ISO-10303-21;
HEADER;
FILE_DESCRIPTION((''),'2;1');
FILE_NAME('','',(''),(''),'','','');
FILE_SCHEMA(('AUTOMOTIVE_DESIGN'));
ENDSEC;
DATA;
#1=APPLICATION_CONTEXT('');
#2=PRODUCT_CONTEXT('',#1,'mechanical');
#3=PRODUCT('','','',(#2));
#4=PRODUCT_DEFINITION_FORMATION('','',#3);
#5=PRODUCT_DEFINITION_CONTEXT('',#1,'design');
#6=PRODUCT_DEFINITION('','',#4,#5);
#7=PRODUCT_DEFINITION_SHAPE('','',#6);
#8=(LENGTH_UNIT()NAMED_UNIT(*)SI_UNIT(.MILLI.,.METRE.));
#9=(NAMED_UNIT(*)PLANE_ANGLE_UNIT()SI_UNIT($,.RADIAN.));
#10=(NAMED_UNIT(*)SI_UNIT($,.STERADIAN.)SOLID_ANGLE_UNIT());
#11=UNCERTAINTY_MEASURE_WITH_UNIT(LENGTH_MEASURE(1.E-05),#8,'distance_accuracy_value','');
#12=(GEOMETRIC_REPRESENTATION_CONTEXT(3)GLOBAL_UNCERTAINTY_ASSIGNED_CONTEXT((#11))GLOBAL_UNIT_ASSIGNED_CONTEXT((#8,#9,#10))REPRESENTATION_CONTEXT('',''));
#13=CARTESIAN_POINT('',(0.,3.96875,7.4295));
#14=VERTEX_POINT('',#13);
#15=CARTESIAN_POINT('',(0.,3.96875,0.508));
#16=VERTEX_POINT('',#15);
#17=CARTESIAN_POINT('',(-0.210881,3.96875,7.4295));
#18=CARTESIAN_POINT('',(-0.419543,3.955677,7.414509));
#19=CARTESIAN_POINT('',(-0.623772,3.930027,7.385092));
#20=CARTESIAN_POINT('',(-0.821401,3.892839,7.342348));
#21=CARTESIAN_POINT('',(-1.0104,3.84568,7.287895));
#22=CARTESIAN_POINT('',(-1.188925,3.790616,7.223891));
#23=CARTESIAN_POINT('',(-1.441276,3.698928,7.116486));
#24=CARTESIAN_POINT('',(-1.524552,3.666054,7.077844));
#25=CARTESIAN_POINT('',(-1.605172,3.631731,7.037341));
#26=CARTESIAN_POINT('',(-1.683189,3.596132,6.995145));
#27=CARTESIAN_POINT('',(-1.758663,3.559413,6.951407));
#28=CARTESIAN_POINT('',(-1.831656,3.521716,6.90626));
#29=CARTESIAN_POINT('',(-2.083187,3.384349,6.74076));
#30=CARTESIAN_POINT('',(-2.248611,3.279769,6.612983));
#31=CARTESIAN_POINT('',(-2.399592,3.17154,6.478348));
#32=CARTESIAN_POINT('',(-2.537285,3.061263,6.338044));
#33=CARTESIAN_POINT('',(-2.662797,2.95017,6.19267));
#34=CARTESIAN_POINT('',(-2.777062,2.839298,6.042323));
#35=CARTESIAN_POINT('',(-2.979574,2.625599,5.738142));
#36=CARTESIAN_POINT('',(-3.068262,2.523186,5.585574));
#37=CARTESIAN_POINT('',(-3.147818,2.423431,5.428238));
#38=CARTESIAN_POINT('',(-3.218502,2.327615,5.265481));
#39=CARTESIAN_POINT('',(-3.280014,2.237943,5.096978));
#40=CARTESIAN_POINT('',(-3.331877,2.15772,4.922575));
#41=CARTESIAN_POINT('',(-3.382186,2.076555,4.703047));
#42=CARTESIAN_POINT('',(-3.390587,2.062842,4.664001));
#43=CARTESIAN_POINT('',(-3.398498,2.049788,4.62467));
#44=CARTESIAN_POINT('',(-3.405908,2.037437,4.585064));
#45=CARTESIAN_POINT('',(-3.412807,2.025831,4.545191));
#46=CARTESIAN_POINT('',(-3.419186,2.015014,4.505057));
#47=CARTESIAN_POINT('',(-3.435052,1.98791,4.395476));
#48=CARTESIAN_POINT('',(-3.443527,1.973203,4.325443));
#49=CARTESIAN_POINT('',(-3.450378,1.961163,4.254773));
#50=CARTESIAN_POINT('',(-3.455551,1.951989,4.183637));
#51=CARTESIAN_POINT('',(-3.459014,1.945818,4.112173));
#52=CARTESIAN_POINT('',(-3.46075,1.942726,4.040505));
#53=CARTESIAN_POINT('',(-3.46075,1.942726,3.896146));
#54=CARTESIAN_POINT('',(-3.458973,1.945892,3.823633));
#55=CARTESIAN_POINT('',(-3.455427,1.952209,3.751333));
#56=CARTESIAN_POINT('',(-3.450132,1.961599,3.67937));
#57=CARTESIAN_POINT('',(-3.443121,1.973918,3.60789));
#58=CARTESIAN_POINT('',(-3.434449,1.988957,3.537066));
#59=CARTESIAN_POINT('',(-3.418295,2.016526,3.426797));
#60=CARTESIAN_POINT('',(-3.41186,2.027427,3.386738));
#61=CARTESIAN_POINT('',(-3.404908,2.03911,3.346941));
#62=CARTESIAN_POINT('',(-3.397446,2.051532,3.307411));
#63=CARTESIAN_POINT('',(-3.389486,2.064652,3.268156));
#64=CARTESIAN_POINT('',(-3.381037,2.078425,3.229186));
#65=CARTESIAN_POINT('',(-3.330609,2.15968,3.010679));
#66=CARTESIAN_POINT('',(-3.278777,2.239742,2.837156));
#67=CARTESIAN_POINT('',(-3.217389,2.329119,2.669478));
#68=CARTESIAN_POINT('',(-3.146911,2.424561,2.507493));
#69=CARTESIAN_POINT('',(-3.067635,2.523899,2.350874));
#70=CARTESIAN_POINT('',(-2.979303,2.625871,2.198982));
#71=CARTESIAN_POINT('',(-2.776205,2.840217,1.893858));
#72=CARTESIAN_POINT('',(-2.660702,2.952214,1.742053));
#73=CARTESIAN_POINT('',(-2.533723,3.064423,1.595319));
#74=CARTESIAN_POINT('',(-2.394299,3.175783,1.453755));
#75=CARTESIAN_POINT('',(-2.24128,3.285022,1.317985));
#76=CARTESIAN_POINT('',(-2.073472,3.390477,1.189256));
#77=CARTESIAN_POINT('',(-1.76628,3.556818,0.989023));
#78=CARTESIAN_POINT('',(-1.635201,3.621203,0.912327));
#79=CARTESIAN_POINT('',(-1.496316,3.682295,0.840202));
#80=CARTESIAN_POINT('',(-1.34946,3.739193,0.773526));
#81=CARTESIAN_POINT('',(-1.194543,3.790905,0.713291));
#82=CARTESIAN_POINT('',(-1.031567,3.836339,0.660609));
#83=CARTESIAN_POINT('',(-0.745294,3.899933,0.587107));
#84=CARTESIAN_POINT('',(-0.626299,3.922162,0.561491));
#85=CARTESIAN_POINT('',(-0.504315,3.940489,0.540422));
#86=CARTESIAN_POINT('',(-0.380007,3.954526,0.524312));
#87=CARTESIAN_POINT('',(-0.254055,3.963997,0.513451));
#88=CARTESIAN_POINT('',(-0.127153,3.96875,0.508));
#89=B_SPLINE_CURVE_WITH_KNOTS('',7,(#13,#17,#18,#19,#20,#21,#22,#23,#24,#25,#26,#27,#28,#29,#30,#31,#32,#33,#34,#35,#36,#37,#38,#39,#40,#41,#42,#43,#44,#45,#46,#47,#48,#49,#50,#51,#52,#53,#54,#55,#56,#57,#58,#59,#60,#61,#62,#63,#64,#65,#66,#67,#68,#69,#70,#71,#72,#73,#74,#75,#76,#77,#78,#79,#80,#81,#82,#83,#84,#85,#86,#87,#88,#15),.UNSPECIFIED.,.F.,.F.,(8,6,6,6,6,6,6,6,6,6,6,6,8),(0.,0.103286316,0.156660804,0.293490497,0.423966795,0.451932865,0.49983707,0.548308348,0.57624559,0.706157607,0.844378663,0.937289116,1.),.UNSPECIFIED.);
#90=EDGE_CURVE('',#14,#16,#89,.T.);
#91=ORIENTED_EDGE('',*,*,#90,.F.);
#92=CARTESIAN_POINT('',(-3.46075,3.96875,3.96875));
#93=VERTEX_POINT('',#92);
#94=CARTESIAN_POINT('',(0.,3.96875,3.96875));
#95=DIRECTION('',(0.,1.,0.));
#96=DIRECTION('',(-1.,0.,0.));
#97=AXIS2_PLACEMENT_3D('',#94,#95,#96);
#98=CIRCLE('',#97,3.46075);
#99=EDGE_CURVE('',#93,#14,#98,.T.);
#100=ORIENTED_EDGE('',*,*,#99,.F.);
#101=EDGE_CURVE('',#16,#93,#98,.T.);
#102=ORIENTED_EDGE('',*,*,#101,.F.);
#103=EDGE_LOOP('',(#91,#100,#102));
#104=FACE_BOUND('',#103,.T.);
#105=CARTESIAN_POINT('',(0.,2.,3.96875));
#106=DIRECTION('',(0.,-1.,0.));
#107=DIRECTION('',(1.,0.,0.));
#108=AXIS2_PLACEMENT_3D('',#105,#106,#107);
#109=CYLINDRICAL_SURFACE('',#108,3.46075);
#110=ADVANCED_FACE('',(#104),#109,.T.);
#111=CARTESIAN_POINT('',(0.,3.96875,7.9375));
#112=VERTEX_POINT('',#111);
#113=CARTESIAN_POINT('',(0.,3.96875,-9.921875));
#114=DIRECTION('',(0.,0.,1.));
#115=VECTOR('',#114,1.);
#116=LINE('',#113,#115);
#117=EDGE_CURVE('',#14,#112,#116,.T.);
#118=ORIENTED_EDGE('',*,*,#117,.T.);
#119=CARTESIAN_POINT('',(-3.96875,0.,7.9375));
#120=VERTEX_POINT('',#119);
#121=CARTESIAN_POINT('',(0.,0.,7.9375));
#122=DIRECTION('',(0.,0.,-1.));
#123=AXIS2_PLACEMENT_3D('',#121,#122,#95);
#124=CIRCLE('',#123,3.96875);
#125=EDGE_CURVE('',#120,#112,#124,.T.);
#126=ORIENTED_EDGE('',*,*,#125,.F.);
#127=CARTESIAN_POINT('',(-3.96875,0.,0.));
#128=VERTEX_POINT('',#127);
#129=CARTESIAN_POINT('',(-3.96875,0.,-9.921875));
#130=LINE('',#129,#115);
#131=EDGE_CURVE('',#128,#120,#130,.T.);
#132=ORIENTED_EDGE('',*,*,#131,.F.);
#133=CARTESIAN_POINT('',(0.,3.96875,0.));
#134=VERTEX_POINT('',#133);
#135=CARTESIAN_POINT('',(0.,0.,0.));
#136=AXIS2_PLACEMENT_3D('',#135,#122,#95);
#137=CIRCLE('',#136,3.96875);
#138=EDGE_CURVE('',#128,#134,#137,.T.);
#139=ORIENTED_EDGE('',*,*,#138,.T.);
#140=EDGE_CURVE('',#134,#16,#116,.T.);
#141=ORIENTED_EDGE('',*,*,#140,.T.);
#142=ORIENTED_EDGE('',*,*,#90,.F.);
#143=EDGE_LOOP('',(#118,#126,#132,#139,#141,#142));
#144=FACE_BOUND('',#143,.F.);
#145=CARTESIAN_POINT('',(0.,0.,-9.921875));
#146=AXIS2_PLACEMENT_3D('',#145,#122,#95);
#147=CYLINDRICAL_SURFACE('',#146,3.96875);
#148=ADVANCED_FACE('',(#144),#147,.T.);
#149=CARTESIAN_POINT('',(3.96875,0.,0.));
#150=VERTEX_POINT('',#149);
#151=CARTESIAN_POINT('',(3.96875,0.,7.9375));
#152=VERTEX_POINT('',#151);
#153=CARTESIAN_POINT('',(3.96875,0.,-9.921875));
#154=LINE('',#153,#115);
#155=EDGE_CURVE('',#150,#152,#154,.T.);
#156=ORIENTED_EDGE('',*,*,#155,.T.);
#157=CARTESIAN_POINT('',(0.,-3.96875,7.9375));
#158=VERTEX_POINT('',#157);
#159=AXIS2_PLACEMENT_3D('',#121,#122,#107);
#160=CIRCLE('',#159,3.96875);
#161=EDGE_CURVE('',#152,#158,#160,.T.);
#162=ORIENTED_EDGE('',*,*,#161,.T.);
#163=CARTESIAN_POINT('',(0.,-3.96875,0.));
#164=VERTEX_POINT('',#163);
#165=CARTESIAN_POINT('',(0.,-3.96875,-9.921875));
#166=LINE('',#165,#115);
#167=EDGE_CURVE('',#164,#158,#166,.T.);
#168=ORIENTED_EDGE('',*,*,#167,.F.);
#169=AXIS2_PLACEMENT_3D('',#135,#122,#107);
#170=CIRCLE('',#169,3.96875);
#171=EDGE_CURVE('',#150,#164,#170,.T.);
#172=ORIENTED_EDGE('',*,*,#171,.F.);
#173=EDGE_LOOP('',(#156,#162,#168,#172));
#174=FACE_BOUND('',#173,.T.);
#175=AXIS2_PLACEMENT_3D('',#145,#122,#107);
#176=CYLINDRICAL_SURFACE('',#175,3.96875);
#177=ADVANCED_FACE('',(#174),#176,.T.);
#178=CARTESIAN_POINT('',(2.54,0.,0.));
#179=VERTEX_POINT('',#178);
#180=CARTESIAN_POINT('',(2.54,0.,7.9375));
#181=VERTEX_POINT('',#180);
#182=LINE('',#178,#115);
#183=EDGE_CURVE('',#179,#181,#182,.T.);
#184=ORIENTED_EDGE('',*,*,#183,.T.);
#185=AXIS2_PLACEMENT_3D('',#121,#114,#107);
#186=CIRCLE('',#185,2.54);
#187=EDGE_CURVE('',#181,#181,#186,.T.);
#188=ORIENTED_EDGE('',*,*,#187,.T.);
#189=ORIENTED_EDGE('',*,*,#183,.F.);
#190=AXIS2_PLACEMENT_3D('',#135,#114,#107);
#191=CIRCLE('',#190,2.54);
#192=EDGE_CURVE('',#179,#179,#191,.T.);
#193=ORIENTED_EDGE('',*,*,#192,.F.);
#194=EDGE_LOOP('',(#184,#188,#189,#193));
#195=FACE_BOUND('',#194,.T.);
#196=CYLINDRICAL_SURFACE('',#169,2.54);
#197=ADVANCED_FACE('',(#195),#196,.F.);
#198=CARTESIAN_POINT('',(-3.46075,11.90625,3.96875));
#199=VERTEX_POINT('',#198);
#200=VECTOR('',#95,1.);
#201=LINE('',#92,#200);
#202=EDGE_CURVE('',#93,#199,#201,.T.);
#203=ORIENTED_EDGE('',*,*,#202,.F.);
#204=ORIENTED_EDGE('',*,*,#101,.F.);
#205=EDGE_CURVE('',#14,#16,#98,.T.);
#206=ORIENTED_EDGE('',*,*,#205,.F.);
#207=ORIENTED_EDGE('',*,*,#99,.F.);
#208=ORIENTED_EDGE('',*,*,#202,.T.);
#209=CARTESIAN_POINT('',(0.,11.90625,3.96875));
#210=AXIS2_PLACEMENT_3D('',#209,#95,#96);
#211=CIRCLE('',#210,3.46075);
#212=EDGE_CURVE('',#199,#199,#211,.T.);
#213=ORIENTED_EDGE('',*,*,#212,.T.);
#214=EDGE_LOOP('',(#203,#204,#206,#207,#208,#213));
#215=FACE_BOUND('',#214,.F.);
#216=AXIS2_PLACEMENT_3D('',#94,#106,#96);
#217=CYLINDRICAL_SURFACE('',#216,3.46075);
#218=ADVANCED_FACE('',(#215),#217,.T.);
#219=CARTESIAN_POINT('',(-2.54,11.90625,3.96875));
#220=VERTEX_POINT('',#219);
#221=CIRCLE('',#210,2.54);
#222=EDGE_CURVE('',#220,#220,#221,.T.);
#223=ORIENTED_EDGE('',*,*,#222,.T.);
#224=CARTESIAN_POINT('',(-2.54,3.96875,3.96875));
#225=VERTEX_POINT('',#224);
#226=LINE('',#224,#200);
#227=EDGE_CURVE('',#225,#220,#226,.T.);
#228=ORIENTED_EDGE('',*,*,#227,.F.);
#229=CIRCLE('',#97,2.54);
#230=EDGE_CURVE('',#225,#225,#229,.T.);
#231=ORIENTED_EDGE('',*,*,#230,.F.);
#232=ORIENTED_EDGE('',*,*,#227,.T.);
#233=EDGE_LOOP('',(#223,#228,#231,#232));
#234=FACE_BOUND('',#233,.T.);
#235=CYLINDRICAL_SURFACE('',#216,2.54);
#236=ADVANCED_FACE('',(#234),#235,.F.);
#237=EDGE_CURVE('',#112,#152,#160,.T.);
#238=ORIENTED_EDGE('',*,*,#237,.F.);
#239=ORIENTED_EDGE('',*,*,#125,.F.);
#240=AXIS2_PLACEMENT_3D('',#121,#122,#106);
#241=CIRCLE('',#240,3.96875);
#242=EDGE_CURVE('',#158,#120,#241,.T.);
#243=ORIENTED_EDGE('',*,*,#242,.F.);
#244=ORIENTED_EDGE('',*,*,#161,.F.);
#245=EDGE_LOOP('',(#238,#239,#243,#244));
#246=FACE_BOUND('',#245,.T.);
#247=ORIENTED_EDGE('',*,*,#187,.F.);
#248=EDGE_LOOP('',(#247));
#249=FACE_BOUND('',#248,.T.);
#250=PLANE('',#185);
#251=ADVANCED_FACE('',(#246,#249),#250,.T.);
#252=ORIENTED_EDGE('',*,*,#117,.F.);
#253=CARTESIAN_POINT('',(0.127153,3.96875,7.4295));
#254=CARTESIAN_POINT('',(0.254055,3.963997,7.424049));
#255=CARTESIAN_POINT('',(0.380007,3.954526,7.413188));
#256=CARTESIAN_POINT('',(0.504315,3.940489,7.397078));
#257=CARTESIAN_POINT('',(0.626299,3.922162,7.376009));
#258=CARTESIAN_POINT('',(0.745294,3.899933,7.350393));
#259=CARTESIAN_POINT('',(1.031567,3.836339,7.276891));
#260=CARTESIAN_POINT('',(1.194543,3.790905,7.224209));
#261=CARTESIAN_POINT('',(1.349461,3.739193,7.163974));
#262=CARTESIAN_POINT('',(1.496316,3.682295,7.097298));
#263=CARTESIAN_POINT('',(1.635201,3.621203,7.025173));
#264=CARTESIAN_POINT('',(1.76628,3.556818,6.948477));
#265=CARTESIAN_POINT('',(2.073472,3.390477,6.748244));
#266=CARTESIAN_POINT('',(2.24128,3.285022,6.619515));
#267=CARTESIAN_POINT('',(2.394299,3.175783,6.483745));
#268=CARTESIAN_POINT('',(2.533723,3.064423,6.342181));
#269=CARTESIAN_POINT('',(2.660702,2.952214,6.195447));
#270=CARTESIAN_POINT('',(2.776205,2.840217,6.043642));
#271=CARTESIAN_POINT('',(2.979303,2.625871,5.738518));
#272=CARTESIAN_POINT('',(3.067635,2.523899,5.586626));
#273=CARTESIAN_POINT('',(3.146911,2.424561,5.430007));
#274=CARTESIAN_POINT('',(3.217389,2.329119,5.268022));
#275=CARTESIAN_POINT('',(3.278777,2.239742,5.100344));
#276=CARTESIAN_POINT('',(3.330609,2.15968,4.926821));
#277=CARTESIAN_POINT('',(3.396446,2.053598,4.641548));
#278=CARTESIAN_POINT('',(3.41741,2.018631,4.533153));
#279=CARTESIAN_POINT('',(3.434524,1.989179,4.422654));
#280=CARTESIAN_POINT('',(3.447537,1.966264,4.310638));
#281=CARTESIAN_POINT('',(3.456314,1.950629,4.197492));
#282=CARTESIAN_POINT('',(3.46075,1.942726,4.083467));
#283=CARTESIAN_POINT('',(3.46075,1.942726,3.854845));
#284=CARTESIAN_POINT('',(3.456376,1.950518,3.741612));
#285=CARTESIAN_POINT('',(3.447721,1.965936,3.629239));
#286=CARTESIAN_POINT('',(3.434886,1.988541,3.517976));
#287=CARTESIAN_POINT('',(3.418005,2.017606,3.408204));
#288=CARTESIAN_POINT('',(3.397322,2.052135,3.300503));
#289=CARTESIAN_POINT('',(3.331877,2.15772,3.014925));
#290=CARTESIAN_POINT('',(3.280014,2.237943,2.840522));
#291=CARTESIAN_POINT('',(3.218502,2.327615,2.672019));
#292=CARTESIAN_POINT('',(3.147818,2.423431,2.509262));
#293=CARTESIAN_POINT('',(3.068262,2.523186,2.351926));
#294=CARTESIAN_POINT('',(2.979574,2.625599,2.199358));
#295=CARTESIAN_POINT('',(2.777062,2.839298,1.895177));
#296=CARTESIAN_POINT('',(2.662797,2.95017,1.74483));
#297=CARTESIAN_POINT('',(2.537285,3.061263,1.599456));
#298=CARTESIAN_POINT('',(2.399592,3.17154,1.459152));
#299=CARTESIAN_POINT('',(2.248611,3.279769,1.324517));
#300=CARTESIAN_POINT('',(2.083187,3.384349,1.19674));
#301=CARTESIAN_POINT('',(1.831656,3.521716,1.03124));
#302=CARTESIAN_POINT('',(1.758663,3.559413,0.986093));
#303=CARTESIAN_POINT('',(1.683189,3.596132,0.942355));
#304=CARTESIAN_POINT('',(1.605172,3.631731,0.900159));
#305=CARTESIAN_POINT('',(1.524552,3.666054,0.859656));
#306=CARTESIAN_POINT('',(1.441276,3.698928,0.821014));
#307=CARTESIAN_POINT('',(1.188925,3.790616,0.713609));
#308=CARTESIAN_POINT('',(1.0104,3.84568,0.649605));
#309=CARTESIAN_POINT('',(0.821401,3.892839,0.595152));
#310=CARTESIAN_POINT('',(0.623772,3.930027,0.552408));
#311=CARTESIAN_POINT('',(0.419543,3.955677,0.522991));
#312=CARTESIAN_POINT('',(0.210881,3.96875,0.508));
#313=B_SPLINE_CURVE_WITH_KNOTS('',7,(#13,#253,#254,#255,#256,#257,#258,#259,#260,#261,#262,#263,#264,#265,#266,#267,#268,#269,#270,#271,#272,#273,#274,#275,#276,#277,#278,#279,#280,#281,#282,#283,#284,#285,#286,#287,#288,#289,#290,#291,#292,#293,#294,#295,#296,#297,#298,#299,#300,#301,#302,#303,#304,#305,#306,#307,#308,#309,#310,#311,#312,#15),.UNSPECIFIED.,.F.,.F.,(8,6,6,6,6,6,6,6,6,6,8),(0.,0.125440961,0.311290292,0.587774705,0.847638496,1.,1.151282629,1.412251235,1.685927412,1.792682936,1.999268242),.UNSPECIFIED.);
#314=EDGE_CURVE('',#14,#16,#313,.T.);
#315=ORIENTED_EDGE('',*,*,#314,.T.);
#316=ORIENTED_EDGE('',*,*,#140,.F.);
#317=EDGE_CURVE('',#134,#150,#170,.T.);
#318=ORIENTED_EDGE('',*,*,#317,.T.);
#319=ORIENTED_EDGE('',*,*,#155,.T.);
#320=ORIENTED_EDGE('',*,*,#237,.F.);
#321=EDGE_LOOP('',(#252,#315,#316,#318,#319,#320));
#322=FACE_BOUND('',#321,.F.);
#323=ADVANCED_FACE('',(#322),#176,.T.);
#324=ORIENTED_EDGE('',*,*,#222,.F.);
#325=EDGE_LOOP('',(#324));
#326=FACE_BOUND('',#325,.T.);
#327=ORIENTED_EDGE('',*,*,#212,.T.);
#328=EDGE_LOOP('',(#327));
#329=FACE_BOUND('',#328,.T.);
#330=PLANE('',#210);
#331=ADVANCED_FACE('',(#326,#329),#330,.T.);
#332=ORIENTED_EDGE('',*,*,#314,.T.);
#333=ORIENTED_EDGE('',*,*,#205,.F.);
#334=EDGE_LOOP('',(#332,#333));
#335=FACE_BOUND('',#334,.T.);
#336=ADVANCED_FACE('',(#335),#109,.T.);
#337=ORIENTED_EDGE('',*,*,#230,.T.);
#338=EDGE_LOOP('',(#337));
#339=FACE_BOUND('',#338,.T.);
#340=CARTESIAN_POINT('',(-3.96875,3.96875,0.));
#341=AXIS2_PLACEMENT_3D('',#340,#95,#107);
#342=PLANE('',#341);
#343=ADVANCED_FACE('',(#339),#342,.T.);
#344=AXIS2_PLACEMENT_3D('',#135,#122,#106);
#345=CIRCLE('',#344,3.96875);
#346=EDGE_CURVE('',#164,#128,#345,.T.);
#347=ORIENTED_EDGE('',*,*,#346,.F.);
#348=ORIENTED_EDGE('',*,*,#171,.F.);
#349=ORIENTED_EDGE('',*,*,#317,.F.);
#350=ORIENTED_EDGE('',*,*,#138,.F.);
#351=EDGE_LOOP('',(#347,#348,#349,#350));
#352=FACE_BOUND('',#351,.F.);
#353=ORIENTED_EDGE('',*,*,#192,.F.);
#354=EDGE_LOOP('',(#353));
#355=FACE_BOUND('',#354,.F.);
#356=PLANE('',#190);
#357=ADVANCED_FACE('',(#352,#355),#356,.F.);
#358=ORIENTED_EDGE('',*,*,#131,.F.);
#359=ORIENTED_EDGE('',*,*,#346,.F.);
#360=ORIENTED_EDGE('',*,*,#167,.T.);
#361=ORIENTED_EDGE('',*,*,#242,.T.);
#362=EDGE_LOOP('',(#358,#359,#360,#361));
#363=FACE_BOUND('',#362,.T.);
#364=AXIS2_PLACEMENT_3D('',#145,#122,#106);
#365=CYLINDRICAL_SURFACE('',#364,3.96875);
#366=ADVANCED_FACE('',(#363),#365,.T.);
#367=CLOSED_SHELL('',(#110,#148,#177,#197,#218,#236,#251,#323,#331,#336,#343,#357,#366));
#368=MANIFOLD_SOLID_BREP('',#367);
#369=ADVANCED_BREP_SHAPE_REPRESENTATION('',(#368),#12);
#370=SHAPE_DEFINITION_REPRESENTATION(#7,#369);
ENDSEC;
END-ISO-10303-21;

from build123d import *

# Parameters (mm, degrees)
F0_W         = 7.9375
F0_H         = 7.9375
F0_R         = 2.54
F1_DEPTH     = 7.9375
F2_R         = 3.46075
F2_R_2       = 2.54
F3_DEPTH     = 7.9375
F4_T3_DEPTH  = 27.78125
F4_S4_R      = 3.46075
F4_T5_DEPTH  = 16
F4_T8_DEPTH  = 27.78125
F4_S9_R      = 3.46075
F4_T10_DEPTH = 16
F4_T13_DEPTH = 27.78125
F4_T16_DEPTH = 27.78125


# Not quite as in the source:
# - a fillet or chamfer that OpenCascade refuses, or shapes differently, is made with other operations: its cross-section is extruded or revolved along the edge and cut away or added


with BuildPart() as f1:
    # F0 (on Top) → F1 (new body)
    with BuildSketch(Plane.XY):
        Rectangle(F0_W, F0_H)
        Circle(F0_R, mode=Mode.SUBTRACT)
    extrude(amount=F1_DEPTH)

    # F2 (on face) → F3 (join)
    with BuildSketch(Plane(origin=(0, 3.96875, 0), x_dir=(-1, 0, 0), z_dir=(0, 1, 0))):
        with Locations((0, 3.96875)):
            Circle(F2_R)
        with Locations((0, 3.96875)):
            Circle(F2_R_2, mode=Mode.SUBTRACT)
    extrude(amount=F3_DEPTH)

    # F4: fillet of radius 3.96875 on 4 edges, made by hand


with BuildPart() as f4_tool1:
    # F4_s2 → F4_t3 (new body)
    with BuildSketch(Plane.XY.offset(-9.921875)):
        with BuildLine():
            ThreePointArc((0, 3.96875), (-2.8063300378, 2.8063300378), (-3.96875, 0))
            Line((-3.96875, 0), (-3.96875, 3.96875))
            Line((-3.96875, 3.96875), (0, 3.96875))
        make_face()
    extrude(amount=F4_T3_DEPTH)

    # F4_s4 → F4_t5 (cut, symmetric)
    with BuildSketch(Plane.XZ.offset(-2)):
        with Locations((0, 3.96875)):
            Circle(F4_S4_R)
    extrude(amount=F4_T5_DEPTH, both=True, mode=Mode.SUBTRACT)


with BuildPart() as f4_tool6:
    # F4_s7 → F4_t8 (new body)
    with BuildSketch(Plane.XY.offset(-9.921875)):
        with BuildLine():
            ThreePointArc((3.96875, 0), (2.8063300378, 2.8063300378), (0, 3.96875))
            Line((0, 3.96875), (3.96875, 3.96875))
            Line((3.96875, 3.96875), (3.96875, 0))
        make_face()
    extrude(amount=F4_T8_DEPTH)

    # F4_s9 → F4_t10 (cut, symmetric)
    with BuildSketch(Plane.XZ.offset(-2)):
        with Locations((0, 3.96875)):
            Circle(F4_S9_R)
    extrude(amount=F4_T10_DEPTH, both=True, mode=Mode.SUBTRACT)


with BuildPart() as f4_tool11:
    # F4_s12 → F4_t13 (new body)
    with BuildSketch(Plane.XY.offset(-9.921875)):
        with BuildLine():
            ThreePointArc((3.96875, 0), (2.8063300378, -2.8063300378), (0, -3.96875))
            Line((0, -3.96875), (3.96875, -3.96875))
            Line((3.96875, -3.96875), (3.96875, 0))
        make_face()
    extrude(amount=F4_T13_DEPTH)


with BuildPart() as f4_tool14:
    # F4_s15 → F4_t16 (new body)
    with BuildSketch(Plane.XY.offset(-9.921875)):
        with BuildLine():
            ThreePointArc((0, -3.96875), (-2.8063300378, -2.8063300378), (-3.96875, 0))
            Line((-3.96875, 0), (-3.96875, -3.96875))
            Line((-3.96875, -3.96875), (0, -3.96875))
        make_face()
    extrude(amount=F4_T16_DEPTH)


with BuildPart() as f1_1:
    add(f1.part)

    # F4_t17: cut F4_tool1, F4_tool6, F4_tool11, F4_tool14
    add([f4_tool1.part, f4_tool6.part, f4_tool11.part, f4_tool14.part], mode=Mode.SUBTRACT)


solid = f1_1.part
